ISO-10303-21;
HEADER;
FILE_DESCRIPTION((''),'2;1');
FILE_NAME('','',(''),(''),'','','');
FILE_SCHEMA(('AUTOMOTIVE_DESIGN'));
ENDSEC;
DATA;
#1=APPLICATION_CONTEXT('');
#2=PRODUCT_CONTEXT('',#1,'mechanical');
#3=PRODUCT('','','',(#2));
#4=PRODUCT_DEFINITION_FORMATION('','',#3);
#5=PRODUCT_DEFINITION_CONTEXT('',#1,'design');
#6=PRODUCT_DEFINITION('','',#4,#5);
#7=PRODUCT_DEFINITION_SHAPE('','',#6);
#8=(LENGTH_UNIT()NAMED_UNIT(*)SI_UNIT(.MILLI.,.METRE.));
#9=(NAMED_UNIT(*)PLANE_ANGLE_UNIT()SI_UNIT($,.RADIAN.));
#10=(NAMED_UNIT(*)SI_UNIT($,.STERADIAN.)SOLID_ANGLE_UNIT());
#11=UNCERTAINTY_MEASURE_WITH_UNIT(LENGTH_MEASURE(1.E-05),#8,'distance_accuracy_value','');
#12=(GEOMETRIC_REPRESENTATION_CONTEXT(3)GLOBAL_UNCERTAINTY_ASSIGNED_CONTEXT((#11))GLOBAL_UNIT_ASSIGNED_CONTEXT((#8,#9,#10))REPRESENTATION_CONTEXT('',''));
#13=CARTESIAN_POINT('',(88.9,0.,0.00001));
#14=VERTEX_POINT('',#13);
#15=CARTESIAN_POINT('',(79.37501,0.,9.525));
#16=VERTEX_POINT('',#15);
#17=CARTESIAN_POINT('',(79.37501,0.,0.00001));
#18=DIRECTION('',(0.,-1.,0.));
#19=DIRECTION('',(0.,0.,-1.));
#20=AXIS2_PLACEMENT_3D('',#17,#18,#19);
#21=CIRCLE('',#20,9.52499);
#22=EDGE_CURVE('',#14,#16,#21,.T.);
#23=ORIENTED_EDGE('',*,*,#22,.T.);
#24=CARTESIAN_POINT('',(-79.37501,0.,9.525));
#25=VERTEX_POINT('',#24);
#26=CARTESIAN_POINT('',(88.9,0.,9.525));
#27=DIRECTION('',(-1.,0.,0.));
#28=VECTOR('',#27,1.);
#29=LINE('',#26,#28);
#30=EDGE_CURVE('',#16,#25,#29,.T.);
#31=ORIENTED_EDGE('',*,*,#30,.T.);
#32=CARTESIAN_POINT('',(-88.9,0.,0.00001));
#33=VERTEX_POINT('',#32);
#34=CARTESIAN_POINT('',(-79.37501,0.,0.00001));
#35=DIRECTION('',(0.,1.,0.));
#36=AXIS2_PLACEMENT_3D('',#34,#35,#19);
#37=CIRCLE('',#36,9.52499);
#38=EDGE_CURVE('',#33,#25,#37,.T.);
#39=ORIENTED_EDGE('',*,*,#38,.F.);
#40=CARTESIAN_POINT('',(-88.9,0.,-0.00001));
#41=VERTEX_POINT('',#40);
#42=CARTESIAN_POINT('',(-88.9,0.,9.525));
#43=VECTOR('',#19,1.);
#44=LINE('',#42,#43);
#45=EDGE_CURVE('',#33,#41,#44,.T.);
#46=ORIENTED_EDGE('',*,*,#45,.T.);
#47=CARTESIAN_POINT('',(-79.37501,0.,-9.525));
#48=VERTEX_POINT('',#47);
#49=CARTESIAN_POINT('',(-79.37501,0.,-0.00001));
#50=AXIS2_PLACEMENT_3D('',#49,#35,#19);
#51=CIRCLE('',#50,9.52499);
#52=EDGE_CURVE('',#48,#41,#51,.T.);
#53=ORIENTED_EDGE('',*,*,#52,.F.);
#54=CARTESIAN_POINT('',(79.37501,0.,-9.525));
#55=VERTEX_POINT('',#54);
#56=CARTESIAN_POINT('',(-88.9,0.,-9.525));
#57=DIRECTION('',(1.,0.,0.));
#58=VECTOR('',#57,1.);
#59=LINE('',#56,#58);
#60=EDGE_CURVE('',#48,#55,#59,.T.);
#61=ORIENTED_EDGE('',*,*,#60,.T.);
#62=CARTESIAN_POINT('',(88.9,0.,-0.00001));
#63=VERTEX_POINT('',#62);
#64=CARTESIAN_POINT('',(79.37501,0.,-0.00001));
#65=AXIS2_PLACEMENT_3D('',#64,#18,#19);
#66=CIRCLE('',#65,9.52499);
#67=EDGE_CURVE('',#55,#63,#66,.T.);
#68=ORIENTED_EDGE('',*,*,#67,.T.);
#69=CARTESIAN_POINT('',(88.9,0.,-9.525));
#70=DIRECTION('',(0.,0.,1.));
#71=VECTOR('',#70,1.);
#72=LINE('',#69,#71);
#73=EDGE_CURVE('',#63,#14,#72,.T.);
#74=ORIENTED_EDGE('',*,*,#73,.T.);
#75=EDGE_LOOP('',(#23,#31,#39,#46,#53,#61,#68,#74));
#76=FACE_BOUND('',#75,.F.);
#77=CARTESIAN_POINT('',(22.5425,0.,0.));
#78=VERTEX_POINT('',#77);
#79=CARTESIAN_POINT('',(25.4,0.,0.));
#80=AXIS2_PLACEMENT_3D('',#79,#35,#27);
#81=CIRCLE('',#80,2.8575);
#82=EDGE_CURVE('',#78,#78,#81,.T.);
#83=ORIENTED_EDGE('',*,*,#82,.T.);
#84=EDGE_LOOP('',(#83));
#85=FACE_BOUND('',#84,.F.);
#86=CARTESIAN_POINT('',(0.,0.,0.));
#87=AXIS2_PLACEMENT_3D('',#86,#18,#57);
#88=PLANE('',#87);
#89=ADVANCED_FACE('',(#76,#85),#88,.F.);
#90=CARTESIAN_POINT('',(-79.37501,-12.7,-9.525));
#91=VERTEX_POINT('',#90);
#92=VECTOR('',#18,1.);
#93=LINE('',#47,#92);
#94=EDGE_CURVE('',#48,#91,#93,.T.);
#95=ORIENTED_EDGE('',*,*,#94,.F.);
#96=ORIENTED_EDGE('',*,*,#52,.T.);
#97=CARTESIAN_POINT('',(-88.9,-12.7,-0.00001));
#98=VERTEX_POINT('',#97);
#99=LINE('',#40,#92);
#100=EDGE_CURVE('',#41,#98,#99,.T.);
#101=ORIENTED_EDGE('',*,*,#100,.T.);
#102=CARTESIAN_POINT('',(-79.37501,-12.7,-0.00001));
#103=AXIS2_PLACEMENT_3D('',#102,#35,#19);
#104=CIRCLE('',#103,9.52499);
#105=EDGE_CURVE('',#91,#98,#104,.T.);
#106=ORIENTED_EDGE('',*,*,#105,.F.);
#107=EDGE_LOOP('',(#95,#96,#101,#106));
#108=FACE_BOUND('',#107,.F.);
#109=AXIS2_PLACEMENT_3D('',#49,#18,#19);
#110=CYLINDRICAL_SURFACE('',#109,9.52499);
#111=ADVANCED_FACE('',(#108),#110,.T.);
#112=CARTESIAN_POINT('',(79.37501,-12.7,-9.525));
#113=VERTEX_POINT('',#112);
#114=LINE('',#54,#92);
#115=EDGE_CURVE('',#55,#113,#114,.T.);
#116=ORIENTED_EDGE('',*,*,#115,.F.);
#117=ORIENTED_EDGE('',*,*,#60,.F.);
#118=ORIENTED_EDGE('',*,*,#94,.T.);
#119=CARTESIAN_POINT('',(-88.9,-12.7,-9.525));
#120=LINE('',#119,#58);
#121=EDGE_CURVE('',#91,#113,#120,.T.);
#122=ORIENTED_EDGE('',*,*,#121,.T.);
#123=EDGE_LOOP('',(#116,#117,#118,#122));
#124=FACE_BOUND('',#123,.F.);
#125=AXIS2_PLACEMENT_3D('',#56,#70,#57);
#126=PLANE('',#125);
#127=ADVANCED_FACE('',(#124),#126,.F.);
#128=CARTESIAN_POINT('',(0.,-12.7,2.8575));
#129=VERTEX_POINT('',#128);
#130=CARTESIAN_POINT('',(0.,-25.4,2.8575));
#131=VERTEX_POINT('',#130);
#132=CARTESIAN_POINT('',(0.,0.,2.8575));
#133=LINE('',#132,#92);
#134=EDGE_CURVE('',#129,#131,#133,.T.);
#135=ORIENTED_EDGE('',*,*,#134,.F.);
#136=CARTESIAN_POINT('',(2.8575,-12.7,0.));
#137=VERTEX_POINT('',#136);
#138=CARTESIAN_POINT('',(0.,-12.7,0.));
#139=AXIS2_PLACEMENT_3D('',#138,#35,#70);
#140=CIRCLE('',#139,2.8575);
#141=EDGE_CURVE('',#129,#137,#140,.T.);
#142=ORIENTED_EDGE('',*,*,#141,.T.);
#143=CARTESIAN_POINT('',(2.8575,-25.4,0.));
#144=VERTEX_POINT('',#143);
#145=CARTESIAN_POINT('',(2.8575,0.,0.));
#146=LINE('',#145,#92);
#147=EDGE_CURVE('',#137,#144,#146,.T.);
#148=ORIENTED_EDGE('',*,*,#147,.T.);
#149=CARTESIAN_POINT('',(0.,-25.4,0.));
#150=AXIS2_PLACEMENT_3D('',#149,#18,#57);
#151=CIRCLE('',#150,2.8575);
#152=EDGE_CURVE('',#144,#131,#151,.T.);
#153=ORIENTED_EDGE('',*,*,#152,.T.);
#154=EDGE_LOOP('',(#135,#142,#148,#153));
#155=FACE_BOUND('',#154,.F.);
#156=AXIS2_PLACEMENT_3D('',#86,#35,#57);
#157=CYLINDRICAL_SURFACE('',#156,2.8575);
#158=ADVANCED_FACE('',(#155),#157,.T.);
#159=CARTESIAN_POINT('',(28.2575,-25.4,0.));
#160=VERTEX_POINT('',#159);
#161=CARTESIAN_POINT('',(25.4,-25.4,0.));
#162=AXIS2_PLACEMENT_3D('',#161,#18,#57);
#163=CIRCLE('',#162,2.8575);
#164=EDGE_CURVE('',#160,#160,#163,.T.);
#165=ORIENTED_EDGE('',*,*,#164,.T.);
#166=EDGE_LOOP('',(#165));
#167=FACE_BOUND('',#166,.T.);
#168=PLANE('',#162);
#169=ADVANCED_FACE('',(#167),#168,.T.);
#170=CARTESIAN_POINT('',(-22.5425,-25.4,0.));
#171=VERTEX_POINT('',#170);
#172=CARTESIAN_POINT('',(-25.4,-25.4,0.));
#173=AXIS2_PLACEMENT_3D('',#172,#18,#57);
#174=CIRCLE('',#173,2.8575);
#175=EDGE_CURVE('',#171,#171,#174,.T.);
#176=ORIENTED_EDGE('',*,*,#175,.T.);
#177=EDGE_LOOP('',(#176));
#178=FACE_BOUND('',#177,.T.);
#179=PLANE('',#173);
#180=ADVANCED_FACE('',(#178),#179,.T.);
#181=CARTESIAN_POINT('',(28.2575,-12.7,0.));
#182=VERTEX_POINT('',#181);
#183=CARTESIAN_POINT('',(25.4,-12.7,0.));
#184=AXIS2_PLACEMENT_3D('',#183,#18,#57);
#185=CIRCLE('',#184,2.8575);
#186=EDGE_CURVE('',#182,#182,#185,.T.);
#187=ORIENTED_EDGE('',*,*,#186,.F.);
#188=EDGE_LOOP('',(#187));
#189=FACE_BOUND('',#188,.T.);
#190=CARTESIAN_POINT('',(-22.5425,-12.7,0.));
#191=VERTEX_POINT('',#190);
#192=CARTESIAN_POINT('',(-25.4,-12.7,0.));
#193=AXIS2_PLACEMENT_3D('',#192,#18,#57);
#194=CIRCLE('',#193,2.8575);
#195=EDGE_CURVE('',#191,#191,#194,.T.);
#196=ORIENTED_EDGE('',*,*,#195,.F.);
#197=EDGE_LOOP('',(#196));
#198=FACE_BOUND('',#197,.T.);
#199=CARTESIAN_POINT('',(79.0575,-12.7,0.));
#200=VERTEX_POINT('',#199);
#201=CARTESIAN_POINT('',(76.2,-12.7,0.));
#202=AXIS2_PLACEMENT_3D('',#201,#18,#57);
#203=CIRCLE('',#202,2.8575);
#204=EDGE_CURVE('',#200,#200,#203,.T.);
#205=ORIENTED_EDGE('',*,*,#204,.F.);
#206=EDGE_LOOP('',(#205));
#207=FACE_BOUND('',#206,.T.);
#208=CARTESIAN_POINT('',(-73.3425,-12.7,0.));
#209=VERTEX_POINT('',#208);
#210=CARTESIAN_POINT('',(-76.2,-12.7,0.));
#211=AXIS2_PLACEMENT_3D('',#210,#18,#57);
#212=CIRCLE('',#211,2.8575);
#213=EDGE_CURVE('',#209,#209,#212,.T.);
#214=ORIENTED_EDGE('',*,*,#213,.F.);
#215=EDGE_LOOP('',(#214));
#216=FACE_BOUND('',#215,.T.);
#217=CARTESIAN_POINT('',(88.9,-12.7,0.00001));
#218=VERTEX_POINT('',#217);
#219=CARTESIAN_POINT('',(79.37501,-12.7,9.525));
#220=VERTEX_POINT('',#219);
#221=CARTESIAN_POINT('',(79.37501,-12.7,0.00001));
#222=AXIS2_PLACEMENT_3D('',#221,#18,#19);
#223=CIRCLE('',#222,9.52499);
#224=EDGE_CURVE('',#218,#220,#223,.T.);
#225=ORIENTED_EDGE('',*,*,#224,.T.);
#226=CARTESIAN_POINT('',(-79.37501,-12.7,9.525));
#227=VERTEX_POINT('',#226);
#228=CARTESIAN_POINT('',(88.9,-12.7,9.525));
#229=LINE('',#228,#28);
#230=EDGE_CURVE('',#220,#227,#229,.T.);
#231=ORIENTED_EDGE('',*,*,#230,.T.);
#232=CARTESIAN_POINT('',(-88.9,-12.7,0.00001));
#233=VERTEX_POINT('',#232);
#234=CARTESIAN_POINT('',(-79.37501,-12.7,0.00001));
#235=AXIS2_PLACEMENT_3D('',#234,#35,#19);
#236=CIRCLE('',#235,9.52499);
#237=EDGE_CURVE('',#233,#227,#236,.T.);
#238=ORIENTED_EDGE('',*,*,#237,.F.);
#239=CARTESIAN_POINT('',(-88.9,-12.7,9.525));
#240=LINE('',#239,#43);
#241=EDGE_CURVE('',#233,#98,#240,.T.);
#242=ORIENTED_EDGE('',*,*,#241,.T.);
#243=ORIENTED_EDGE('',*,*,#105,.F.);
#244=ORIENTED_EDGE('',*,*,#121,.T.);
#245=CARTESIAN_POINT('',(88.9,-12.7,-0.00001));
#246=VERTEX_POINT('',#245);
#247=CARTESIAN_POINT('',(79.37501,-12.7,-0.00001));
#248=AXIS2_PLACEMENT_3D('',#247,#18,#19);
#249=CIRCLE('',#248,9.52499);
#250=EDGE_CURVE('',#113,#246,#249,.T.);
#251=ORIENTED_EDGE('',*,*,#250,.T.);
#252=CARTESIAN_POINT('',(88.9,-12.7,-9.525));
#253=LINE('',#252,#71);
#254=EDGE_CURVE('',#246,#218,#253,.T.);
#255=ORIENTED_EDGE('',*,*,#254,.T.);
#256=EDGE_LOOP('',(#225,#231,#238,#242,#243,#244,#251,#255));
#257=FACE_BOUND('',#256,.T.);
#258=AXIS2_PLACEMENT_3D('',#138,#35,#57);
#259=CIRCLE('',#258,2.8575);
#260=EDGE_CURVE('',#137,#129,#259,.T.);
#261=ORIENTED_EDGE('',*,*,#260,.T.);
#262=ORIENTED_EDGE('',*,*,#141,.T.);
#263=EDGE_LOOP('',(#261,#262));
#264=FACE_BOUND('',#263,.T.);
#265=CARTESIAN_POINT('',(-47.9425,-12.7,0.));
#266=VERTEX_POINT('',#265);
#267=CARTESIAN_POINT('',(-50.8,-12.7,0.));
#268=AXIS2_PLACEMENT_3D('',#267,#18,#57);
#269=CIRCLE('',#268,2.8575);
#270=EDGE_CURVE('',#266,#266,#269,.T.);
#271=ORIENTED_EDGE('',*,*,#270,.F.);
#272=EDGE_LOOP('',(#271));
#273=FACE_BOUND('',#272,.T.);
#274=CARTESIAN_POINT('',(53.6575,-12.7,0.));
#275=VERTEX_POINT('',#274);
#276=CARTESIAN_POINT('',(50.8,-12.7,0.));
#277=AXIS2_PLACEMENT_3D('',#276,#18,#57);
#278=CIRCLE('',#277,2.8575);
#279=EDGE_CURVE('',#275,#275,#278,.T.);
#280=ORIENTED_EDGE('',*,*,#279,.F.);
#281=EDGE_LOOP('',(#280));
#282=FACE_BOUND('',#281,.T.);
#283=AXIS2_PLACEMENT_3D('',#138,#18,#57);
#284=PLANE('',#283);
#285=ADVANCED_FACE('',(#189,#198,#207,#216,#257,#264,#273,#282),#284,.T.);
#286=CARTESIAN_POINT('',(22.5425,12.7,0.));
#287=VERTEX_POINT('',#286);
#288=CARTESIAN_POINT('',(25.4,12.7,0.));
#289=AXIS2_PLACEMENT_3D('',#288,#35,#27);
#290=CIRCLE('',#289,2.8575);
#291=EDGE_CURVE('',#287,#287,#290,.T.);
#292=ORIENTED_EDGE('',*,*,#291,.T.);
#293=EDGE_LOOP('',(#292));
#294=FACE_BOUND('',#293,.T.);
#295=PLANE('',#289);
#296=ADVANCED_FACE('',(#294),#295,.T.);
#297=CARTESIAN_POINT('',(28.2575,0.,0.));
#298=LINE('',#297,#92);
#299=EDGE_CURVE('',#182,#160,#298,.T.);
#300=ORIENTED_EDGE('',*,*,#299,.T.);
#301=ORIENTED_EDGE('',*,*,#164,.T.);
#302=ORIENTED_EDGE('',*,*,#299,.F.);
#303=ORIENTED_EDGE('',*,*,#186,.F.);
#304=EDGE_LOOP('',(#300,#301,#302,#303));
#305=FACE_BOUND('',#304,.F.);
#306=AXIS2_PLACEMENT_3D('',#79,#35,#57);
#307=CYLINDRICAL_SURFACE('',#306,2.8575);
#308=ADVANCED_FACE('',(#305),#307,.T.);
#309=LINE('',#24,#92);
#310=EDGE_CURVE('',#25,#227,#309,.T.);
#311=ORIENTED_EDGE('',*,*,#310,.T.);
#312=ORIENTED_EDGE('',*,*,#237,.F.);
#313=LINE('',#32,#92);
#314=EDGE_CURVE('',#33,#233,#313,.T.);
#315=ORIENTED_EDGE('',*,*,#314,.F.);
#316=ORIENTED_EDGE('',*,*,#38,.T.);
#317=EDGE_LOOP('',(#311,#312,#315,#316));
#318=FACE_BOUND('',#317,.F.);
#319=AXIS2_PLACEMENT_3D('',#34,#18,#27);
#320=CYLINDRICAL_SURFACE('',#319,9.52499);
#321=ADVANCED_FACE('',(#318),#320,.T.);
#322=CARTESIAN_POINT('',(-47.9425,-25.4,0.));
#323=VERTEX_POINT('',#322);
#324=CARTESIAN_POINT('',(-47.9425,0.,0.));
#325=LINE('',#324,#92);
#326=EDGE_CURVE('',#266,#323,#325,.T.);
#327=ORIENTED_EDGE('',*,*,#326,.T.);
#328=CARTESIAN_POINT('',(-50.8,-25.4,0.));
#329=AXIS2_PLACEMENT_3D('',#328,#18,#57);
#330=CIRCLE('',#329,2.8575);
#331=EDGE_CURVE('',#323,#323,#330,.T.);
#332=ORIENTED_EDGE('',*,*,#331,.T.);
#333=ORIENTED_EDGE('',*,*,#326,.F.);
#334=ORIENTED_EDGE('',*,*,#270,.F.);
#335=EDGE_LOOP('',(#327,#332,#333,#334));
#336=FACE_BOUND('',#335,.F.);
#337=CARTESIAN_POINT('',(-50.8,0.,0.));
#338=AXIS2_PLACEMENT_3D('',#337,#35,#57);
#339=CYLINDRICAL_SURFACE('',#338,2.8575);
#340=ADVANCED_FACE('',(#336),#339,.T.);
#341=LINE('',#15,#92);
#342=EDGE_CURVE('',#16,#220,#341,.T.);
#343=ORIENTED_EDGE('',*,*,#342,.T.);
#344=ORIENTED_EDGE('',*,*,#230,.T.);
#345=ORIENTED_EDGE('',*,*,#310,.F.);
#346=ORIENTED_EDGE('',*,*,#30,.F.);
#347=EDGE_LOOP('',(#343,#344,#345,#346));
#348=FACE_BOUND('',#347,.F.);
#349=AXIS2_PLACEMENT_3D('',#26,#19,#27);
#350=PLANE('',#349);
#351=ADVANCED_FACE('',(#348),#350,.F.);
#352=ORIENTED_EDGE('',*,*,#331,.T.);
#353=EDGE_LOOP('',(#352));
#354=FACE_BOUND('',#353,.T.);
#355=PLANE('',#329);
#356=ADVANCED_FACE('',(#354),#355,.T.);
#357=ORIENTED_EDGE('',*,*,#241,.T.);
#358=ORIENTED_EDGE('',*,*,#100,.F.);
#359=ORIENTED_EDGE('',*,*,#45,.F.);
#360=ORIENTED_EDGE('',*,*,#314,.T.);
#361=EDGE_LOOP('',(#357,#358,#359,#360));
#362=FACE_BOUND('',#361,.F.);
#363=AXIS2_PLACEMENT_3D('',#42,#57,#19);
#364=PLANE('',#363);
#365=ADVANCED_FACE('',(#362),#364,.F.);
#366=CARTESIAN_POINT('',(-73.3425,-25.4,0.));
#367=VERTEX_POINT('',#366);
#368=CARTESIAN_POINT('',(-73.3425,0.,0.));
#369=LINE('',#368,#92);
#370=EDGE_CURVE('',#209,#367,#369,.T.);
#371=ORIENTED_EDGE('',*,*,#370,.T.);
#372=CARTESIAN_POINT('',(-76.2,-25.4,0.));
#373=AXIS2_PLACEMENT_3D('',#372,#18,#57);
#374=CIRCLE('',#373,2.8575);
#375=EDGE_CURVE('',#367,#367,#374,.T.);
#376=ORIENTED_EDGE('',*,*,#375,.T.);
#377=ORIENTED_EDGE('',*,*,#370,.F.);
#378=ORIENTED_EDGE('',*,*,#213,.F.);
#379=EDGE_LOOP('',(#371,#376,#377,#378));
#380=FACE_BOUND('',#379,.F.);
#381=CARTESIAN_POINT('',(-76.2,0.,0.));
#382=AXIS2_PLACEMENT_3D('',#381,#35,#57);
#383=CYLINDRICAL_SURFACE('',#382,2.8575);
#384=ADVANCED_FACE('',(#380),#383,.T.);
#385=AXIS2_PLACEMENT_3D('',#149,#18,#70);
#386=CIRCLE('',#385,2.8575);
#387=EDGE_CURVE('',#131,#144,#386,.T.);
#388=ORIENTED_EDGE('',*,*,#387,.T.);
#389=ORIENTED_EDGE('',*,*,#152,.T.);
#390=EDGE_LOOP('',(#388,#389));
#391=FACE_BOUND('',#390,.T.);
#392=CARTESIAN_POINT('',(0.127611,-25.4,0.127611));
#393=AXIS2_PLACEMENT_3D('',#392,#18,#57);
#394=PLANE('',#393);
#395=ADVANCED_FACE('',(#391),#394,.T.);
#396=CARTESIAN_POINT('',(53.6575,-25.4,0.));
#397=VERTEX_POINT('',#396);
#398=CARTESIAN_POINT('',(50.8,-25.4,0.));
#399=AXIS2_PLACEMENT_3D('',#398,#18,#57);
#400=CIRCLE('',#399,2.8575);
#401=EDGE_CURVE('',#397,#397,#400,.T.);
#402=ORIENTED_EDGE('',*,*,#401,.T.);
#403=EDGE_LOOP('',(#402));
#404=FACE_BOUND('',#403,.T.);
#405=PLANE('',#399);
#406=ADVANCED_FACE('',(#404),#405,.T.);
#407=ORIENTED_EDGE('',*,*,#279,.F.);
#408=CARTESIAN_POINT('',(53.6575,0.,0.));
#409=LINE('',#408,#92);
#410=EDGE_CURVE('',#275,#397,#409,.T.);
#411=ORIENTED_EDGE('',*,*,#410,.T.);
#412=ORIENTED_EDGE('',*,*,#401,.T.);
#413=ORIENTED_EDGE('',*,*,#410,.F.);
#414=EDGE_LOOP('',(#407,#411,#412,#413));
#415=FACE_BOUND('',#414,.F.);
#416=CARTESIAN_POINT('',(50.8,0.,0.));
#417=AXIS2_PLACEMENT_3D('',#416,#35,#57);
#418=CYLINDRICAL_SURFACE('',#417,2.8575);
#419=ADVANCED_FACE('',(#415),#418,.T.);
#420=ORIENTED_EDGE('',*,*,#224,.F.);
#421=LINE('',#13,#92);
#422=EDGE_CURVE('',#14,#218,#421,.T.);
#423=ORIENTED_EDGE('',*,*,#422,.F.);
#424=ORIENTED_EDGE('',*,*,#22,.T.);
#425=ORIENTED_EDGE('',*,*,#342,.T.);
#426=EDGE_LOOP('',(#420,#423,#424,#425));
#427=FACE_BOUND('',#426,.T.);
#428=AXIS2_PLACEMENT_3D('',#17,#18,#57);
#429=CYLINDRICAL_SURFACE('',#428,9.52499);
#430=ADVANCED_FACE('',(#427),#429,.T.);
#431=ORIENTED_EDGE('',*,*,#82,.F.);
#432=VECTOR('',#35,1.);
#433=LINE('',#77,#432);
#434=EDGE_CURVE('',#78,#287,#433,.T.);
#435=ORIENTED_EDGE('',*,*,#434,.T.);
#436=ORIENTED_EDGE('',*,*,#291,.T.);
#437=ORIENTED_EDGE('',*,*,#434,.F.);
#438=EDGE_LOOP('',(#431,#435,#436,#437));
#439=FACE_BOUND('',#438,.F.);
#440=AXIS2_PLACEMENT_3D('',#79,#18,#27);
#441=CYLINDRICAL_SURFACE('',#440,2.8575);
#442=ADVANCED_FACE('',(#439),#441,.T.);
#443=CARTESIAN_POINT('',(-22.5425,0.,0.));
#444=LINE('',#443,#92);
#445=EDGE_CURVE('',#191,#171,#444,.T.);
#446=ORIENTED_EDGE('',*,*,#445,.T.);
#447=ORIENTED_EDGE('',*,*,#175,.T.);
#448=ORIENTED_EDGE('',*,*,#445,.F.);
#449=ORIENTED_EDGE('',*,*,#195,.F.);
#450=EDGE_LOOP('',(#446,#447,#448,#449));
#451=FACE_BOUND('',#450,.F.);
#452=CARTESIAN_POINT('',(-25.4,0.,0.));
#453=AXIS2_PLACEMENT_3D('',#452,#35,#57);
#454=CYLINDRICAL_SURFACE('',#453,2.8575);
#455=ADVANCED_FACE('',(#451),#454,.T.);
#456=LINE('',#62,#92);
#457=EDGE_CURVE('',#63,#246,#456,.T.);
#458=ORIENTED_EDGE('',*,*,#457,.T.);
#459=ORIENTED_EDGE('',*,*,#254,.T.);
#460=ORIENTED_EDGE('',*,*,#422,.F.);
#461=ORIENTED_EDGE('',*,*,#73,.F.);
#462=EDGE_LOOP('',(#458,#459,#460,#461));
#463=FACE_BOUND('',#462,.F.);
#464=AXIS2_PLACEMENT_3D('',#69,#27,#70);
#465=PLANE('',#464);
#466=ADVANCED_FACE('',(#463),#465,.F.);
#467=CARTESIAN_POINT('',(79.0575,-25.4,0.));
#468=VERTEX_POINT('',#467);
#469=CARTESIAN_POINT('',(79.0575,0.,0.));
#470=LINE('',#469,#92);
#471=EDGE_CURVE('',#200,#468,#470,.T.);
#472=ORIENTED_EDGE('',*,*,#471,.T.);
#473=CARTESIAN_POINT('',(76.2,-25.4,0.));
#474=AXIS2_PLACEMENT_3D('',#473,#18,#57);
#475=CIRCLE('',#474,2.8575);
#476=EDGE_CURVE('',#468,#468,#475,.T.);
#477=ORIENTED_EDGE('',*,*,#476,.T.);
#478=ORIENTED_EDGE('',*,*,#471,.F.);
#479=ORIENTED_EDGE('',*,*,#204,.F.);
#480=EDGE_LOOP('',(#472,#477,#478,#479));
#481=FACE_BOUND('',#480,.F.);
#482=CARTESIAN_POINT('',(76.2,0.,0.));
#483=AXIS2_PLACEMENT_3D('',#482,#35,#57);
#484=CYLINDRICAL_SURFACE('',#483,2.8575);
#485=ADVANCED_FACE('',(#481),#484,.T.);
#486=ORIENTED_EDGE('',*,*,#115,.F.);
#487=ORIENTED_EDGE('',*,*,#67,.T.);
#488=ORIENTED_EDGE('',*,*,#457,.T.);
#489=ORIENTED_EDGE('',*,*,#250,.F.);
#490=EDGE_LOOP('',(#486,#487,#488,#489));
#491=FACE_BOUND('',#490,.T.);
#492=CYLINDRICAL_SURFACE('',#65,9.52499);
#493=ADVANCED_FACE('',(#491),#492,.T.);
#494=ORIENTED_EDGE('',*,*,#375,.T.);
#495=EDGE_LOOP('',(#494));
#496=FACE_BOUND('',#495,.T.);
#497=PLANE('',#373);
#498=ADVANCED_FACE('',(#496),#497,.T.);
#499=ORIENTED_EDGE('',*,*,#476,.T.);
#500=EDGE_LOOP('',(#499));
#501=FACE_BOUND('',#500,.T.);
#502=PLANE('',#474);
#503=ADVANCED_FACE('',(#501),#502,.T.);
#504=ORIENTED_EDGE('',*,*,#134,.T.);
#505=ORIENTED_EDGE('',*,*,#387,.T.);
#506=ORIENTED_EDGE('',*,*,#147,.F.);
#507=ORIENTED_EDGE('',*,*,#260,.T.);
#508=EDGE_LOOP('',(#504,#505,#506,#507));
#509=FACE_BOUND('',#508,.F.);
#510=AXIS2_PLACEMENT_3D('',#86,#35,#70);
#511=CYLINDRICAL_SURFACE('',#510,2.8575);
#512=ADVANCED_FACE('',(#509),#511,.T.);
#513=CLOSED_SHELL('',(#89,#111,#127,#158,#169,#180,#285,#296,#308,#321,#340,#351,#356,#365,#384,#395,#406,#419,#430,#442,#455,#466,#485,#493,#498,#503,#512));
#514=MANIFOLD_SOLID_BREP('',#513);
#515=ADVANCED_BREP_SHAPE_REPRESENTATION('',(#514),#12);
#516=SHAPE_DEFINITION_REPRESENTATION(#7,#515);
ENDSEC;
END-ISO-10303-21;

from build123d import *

# Parameters (mm, degrees)
F0_R     = 2.8575
F1_DEPTH = 12.7
F2_DEPTH = 25.4
F3_R     = 2.8575
F4_DEPTH = 12.7
F5_R     = 9.52499


# Not quite as in the source:
# - a fillet or chamfer is up to 0.001 mm smaller than in the source, because OpenCascade refuses the exact size
# - a feature names something its author has since deleted; it is built from what else it names


with BuildPart() as f1:
    # F0 (on Front) → F1 (new body)
    with BuildSketch(Plane.XZ):
        Polygon((-88.9, -9.525), (88.9, -9.525), (88.9, 9.525), (0, 9.525), (-88.9, 9.525), align=None)
        with Locations((-76.2, 0)):
            Circle(F0_R, mode=Mode.SUBTRACT)
        with Locations((-50.8, 0)):
            Circle(F0_R, mode=Mode.SUBTRACT)
        with Locations((-25.4, 0)):
            Circle(F0_R, mode=Mode.SUBTRACT)
        with BuildLine():
            ThreePointArc((2.8575, 0), (-2.0205576272, -2.0205576272), (0, 2.8575))
            ThreePointArc((0, 2.8575), (2.0205576272, 2.0205576272), (2.8575, 0))
        make_face(mode=Mode.SUBTRACT)
        with Locations((25.4, 0)):
            Circle(F0_R, mode=Mode.SUBTRACT)
        with Locations((50.8, 0)):
            Circle(F0_R, mode=Mode.SUBTRACT)
        with Locations((76.2, 0)):
            Circle(F0_R, mode=Mode.SUBTRACT)
    extrude(amount=F1_DEPTH)

    # F0 (on Front) → F2 (join)
    with BuildSketch(Plane.XZ):
        with BuildLine():
            ThreePointArc((2.8575, 0), (2.0205576272, 2.0205576272), (0, 2.8575))
            ThreePointArc((0, 2.8575), (-2.0205576272, -2.0205576272), (2.8575, 0))
        make_face()
        with Locations((-76.2, 0)):
            Circle(F0_R)
        with Locations((-50.8, 0)):
            Circle(F0_R)
        with Locations((-25.4, 0)):
            Circle(F0_R)
        with Locations((25.4, 0)):
            Circle(F0_R)
        with Locations((50.8, 0)):
            Circle(F0_R)
        with Locations((76.2, 0)):
            Circle(F0_R)
    extrude(amount=F2_DEPTH)

    # F3 (on face) → F4 (join)
    with BuildSketch(Plane(origin=(0, 0, 0), x_dir=(-1, 0, 0), z_dir=(0, 1, 0))):
        with Locations((-25.4, 0)):
            Circle(F3_R)
    extrude(amount=F4_DEPTH)

    # F5 (radius 9.525 in the source; OpenCascade refuses exactly that, so slightly less here)
    f5_edges = [f1.edges().sort_by_distance(p)[0] for p in [
        (88.9, -6.35, 9.525),
        (88.9, -6.35, -9.525),
        (-88.9, -6.35, -9.525),
        (-88.9, -6.35, 9.525),
    ]]
    fillet(f5_edges, radius=F5_R)


solid = f1.part
